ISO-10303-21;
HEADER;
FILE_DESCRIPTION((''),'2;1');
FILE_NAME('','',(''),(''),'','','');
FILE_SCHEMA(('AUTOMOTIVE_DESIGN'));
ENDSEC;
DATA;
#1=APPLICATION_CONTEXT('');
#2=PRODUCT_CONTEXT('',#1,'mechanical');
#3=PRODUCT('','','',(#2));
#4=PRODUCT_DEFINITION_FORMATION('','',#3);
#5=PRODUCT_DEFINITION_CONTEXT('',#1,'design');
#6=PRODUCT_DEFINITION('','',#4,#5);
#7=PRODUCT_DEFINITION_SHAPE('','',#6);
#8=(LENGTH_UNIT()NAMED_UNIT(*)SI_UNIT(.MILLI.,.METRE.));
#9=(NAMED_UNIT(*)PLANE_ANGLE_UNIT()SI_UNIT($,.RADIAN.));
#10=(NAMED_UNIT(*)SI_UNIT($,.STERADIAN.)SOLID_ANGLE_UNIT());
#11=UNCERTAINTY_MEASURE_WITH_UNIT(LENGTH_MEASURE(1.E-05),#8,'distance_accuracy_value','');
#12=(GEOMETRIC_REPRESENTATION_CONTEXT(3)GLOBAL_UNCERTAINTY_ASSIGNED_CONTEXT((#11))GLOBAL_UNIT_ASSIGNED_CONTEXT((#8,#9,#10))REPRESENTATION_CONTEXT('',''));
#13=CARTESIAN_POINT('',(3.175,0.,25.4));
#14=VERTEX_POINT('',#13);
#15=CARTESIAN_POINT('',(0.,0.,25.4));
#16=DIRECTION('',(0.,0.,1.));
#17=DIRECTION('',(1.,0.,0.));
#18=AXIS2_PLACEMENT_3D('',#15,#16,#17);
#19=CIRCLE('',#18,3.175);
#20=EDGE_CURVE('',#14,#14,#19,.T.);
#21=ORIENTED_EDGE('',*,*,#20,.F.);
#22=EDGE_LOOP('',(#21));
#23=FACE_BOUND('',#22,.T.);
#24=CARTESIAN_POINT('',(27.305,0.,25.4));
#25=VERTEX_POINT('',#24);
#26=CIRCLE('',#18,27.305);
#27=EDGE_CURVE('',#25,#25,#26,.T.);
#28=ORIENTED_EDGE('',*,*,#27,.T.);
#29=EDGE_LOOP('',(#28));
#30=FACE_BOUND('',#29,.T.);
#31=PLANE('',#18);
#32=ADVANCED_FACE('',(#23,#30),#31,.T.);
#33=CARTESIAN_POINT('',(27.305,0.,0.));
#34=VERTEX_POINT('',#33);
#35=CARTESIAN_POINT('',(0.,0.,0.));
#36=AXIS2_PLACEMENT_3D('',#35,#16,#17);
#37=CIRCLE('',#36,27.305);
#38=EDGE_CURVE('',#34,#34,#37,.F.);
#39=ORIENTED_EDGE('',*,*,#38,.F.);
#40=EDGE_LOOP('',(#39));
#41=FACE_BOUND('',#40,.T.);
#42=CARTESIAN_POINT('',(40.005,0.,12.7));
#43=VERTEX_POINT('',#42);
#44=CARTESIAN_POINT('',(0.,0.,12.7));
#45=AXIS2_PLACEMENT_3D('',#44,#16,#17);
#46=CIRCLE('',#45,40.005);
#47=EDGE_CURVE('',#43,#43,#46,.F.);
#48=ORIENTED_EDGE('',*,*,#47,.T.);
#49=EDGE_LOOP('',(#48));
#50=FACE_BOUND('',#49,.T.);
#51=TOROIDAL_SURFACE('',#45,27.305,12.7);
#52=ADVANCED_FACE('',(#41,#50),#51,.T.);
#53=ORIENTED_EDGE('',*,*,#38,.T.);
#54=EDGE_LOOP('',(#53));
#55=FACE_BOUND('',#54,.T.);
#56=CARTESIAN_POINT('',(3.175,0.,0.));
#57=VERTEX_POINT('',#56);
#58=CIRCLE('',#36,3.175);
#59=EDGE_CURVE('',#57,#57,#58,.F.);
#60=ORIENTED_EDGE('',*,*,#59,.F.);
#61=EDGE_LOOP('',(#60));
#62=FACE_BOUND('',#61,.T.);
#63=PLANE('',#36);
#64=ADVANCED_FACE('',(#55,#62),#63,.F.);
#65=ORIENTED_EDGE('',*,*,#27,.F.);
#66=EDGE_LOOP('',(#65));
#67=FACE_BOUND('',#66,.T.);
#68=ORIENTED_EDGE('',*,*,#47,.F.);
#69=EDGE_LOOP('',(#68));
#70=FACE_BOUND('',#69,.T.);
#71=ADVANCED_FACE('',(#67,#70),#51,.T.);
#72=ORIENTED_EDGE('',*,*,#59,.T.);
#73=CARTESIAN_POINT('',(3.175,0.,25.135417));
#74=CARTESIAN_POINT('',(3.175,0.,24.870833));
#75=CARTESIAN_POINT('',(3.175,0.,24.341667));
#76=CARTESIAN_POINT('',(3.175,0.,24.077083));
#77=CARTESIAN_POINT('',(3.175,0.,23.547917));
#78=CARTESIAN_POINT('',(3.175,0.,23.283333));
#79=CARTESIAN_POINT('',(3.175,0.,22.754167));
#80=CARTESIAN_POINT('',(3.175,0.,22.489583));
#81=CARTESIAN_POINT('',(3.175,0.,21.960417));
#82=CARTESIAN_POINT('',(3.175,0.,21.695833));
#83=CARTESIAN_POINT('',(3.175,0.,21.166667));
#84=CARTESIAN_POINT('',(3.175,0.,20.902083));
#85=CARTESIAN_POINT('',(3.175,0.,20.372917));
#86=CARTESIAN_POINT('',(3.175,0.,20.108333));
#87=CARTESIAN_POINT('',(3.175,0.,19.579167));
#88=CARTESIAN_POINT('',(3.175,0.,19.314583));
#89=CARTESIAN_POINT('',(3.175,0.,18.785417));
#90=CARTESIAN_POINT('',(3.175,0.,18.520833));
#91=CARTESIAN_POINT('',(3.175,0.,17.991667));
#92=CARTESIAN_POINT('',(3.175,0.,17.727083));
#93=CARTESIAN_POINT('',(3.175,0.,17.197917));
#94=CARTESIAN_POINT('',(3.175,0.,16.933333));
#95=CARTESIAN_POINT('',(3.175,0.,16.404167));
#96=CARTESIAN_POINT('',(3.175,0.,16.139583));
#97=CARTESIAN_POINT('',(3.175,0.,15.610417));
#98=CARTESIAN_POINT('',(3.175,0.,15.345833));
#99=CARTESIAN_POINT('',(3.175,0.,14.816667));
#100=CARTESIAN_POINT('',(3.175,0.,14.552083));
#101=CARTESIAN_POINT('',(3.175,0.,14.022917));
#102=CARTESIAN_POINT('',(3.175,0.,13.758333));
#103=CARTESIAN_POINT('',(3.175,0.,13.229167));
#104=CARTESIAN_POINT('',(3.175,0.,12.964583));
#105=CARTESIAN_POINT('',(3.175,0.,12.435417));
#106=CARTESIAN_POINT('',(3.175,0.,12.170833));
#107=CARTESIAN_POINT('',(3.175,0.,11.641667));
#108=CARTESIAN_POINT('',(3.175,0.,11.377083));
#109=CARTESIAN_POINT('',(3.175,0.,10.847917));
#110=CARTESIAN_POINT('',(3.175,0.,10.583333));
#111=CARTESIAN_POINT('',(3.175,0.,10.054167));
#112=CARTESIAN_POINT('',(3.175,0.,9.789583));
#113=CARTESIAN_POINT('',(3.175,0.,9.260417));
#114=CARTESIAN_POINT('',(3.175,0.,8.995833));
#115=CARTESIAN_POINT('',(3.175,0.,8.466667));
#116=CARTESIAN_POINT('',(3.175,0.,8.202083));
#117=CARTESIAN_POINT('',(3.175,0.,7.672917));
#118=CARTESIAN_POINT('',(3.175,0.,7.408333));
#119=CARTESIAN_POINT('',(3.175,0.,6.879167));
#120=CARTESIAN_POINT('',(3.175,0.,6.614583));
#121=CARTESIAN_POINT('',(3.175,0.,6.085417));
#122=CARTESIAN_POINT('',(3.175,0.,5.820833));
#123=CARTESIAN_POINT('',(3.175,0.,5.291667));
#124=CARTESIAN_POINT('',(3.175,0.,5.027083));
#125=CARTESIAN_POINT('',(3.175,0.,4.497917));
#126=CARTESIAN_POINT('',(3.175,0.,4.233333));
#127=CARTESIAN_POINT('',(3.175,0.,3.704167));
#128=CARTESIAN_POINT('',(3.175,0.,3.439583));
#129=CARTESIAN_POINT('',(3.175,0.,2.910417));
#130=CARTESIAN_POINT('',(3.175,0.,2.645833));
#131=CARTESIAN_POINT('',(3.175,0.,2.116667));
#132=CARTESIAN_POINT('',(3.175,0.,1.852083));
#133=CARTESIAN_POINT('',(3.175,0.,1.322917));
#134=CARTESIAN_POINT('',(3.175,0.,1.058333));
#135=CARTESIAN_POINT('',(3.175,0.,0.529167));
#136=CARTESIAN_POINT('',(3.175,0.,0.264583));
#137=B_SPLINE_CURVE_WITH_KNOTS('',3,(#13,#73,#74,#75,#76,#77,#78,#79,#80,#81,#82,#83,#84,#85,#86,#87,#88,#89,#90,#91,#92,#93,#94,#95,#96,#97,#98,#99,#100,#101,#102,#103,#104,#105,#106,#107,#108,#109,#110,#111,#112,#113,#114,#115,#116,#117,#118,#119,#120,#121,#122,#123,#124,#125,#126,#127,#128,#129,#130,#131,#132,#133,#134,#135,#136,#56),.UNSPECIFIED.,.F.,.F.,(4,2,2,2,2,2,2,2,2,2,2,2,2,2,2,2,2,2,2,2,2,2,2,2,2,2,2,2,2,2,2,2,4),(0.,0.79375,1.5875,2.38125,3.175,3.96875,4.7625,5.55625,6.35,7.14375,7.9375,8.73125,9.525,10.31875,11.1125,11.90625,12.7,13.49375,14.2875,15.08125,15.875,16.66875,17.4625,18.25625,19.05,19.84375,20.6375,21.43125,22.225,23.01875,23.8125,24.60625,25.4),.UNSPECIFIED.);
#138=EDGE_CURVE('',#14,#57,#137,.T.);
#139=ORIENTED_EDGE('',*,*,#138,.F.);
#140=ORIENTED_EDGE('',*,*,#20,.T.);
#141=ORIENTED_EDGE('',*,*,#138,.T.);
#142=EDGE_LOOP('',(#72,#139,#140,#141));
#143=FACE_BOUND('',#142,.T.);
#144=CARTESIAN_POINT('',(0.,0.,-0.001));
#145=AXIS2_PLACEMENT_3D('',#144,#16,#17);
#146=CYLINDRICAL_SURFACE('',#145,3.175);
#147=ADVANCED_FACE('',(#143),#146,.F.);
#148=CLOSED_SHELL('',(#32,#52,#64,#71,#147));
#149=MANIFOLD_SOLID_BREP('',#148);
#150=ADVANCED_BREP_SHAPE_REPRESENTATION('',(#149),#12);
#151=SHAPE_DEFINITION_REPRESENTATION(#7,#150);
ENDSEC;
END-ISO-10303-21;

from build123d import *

# Parameters (mm, degrees)
SKETCH1_R           = 40.005
BOSS_EXTRUDE1_DEPTH = 25.4
CUT_EXTRUDE1_REACH  = 64.016
SKETCH2_R           = 3.175
FILLET1_R           = 12.7


with BuildPart() as part:
    # Sketch1 → Boss-Extrude1 (new body)
    with BuildSketch(Plane.XY):
        Circle(SKETCH1_R)
    extrude(amount=BOSS_EXTRUDE1_DEPTH)

    # Sketch2 → Cut-Extrude1 (cut, up to next)
    with BuildSketch(Plane.XY.offset(25.4), mode=Mode.PRIVATE) as cut_extrude1_sk1:
        Circle(SKETCH2_R)
    cut_extrude1_tool1 = extrude(cut_extrude1_sk1.sketch, amount=-CUT_EXTRUDE1_REACH, mode=Mode.PRIVATE) & part.part
    add(cut_extrude1_tool1.solids().sort_by_distance((0, 0, 25.4))[0], mode=Mode.SUBTRACT)

    # Fillet1
    fillet1_edges = [part.edges().sort_by_distance(p)[0] for p in [
        (-40.005, 0, 0),
        (-40.005, 0, 25.4),
    ]]
    fillet(fillet1_edges, radius=FILLET1_R - 0.0001)  # a hair under: the kernel refuses the full size


solid = part.part
